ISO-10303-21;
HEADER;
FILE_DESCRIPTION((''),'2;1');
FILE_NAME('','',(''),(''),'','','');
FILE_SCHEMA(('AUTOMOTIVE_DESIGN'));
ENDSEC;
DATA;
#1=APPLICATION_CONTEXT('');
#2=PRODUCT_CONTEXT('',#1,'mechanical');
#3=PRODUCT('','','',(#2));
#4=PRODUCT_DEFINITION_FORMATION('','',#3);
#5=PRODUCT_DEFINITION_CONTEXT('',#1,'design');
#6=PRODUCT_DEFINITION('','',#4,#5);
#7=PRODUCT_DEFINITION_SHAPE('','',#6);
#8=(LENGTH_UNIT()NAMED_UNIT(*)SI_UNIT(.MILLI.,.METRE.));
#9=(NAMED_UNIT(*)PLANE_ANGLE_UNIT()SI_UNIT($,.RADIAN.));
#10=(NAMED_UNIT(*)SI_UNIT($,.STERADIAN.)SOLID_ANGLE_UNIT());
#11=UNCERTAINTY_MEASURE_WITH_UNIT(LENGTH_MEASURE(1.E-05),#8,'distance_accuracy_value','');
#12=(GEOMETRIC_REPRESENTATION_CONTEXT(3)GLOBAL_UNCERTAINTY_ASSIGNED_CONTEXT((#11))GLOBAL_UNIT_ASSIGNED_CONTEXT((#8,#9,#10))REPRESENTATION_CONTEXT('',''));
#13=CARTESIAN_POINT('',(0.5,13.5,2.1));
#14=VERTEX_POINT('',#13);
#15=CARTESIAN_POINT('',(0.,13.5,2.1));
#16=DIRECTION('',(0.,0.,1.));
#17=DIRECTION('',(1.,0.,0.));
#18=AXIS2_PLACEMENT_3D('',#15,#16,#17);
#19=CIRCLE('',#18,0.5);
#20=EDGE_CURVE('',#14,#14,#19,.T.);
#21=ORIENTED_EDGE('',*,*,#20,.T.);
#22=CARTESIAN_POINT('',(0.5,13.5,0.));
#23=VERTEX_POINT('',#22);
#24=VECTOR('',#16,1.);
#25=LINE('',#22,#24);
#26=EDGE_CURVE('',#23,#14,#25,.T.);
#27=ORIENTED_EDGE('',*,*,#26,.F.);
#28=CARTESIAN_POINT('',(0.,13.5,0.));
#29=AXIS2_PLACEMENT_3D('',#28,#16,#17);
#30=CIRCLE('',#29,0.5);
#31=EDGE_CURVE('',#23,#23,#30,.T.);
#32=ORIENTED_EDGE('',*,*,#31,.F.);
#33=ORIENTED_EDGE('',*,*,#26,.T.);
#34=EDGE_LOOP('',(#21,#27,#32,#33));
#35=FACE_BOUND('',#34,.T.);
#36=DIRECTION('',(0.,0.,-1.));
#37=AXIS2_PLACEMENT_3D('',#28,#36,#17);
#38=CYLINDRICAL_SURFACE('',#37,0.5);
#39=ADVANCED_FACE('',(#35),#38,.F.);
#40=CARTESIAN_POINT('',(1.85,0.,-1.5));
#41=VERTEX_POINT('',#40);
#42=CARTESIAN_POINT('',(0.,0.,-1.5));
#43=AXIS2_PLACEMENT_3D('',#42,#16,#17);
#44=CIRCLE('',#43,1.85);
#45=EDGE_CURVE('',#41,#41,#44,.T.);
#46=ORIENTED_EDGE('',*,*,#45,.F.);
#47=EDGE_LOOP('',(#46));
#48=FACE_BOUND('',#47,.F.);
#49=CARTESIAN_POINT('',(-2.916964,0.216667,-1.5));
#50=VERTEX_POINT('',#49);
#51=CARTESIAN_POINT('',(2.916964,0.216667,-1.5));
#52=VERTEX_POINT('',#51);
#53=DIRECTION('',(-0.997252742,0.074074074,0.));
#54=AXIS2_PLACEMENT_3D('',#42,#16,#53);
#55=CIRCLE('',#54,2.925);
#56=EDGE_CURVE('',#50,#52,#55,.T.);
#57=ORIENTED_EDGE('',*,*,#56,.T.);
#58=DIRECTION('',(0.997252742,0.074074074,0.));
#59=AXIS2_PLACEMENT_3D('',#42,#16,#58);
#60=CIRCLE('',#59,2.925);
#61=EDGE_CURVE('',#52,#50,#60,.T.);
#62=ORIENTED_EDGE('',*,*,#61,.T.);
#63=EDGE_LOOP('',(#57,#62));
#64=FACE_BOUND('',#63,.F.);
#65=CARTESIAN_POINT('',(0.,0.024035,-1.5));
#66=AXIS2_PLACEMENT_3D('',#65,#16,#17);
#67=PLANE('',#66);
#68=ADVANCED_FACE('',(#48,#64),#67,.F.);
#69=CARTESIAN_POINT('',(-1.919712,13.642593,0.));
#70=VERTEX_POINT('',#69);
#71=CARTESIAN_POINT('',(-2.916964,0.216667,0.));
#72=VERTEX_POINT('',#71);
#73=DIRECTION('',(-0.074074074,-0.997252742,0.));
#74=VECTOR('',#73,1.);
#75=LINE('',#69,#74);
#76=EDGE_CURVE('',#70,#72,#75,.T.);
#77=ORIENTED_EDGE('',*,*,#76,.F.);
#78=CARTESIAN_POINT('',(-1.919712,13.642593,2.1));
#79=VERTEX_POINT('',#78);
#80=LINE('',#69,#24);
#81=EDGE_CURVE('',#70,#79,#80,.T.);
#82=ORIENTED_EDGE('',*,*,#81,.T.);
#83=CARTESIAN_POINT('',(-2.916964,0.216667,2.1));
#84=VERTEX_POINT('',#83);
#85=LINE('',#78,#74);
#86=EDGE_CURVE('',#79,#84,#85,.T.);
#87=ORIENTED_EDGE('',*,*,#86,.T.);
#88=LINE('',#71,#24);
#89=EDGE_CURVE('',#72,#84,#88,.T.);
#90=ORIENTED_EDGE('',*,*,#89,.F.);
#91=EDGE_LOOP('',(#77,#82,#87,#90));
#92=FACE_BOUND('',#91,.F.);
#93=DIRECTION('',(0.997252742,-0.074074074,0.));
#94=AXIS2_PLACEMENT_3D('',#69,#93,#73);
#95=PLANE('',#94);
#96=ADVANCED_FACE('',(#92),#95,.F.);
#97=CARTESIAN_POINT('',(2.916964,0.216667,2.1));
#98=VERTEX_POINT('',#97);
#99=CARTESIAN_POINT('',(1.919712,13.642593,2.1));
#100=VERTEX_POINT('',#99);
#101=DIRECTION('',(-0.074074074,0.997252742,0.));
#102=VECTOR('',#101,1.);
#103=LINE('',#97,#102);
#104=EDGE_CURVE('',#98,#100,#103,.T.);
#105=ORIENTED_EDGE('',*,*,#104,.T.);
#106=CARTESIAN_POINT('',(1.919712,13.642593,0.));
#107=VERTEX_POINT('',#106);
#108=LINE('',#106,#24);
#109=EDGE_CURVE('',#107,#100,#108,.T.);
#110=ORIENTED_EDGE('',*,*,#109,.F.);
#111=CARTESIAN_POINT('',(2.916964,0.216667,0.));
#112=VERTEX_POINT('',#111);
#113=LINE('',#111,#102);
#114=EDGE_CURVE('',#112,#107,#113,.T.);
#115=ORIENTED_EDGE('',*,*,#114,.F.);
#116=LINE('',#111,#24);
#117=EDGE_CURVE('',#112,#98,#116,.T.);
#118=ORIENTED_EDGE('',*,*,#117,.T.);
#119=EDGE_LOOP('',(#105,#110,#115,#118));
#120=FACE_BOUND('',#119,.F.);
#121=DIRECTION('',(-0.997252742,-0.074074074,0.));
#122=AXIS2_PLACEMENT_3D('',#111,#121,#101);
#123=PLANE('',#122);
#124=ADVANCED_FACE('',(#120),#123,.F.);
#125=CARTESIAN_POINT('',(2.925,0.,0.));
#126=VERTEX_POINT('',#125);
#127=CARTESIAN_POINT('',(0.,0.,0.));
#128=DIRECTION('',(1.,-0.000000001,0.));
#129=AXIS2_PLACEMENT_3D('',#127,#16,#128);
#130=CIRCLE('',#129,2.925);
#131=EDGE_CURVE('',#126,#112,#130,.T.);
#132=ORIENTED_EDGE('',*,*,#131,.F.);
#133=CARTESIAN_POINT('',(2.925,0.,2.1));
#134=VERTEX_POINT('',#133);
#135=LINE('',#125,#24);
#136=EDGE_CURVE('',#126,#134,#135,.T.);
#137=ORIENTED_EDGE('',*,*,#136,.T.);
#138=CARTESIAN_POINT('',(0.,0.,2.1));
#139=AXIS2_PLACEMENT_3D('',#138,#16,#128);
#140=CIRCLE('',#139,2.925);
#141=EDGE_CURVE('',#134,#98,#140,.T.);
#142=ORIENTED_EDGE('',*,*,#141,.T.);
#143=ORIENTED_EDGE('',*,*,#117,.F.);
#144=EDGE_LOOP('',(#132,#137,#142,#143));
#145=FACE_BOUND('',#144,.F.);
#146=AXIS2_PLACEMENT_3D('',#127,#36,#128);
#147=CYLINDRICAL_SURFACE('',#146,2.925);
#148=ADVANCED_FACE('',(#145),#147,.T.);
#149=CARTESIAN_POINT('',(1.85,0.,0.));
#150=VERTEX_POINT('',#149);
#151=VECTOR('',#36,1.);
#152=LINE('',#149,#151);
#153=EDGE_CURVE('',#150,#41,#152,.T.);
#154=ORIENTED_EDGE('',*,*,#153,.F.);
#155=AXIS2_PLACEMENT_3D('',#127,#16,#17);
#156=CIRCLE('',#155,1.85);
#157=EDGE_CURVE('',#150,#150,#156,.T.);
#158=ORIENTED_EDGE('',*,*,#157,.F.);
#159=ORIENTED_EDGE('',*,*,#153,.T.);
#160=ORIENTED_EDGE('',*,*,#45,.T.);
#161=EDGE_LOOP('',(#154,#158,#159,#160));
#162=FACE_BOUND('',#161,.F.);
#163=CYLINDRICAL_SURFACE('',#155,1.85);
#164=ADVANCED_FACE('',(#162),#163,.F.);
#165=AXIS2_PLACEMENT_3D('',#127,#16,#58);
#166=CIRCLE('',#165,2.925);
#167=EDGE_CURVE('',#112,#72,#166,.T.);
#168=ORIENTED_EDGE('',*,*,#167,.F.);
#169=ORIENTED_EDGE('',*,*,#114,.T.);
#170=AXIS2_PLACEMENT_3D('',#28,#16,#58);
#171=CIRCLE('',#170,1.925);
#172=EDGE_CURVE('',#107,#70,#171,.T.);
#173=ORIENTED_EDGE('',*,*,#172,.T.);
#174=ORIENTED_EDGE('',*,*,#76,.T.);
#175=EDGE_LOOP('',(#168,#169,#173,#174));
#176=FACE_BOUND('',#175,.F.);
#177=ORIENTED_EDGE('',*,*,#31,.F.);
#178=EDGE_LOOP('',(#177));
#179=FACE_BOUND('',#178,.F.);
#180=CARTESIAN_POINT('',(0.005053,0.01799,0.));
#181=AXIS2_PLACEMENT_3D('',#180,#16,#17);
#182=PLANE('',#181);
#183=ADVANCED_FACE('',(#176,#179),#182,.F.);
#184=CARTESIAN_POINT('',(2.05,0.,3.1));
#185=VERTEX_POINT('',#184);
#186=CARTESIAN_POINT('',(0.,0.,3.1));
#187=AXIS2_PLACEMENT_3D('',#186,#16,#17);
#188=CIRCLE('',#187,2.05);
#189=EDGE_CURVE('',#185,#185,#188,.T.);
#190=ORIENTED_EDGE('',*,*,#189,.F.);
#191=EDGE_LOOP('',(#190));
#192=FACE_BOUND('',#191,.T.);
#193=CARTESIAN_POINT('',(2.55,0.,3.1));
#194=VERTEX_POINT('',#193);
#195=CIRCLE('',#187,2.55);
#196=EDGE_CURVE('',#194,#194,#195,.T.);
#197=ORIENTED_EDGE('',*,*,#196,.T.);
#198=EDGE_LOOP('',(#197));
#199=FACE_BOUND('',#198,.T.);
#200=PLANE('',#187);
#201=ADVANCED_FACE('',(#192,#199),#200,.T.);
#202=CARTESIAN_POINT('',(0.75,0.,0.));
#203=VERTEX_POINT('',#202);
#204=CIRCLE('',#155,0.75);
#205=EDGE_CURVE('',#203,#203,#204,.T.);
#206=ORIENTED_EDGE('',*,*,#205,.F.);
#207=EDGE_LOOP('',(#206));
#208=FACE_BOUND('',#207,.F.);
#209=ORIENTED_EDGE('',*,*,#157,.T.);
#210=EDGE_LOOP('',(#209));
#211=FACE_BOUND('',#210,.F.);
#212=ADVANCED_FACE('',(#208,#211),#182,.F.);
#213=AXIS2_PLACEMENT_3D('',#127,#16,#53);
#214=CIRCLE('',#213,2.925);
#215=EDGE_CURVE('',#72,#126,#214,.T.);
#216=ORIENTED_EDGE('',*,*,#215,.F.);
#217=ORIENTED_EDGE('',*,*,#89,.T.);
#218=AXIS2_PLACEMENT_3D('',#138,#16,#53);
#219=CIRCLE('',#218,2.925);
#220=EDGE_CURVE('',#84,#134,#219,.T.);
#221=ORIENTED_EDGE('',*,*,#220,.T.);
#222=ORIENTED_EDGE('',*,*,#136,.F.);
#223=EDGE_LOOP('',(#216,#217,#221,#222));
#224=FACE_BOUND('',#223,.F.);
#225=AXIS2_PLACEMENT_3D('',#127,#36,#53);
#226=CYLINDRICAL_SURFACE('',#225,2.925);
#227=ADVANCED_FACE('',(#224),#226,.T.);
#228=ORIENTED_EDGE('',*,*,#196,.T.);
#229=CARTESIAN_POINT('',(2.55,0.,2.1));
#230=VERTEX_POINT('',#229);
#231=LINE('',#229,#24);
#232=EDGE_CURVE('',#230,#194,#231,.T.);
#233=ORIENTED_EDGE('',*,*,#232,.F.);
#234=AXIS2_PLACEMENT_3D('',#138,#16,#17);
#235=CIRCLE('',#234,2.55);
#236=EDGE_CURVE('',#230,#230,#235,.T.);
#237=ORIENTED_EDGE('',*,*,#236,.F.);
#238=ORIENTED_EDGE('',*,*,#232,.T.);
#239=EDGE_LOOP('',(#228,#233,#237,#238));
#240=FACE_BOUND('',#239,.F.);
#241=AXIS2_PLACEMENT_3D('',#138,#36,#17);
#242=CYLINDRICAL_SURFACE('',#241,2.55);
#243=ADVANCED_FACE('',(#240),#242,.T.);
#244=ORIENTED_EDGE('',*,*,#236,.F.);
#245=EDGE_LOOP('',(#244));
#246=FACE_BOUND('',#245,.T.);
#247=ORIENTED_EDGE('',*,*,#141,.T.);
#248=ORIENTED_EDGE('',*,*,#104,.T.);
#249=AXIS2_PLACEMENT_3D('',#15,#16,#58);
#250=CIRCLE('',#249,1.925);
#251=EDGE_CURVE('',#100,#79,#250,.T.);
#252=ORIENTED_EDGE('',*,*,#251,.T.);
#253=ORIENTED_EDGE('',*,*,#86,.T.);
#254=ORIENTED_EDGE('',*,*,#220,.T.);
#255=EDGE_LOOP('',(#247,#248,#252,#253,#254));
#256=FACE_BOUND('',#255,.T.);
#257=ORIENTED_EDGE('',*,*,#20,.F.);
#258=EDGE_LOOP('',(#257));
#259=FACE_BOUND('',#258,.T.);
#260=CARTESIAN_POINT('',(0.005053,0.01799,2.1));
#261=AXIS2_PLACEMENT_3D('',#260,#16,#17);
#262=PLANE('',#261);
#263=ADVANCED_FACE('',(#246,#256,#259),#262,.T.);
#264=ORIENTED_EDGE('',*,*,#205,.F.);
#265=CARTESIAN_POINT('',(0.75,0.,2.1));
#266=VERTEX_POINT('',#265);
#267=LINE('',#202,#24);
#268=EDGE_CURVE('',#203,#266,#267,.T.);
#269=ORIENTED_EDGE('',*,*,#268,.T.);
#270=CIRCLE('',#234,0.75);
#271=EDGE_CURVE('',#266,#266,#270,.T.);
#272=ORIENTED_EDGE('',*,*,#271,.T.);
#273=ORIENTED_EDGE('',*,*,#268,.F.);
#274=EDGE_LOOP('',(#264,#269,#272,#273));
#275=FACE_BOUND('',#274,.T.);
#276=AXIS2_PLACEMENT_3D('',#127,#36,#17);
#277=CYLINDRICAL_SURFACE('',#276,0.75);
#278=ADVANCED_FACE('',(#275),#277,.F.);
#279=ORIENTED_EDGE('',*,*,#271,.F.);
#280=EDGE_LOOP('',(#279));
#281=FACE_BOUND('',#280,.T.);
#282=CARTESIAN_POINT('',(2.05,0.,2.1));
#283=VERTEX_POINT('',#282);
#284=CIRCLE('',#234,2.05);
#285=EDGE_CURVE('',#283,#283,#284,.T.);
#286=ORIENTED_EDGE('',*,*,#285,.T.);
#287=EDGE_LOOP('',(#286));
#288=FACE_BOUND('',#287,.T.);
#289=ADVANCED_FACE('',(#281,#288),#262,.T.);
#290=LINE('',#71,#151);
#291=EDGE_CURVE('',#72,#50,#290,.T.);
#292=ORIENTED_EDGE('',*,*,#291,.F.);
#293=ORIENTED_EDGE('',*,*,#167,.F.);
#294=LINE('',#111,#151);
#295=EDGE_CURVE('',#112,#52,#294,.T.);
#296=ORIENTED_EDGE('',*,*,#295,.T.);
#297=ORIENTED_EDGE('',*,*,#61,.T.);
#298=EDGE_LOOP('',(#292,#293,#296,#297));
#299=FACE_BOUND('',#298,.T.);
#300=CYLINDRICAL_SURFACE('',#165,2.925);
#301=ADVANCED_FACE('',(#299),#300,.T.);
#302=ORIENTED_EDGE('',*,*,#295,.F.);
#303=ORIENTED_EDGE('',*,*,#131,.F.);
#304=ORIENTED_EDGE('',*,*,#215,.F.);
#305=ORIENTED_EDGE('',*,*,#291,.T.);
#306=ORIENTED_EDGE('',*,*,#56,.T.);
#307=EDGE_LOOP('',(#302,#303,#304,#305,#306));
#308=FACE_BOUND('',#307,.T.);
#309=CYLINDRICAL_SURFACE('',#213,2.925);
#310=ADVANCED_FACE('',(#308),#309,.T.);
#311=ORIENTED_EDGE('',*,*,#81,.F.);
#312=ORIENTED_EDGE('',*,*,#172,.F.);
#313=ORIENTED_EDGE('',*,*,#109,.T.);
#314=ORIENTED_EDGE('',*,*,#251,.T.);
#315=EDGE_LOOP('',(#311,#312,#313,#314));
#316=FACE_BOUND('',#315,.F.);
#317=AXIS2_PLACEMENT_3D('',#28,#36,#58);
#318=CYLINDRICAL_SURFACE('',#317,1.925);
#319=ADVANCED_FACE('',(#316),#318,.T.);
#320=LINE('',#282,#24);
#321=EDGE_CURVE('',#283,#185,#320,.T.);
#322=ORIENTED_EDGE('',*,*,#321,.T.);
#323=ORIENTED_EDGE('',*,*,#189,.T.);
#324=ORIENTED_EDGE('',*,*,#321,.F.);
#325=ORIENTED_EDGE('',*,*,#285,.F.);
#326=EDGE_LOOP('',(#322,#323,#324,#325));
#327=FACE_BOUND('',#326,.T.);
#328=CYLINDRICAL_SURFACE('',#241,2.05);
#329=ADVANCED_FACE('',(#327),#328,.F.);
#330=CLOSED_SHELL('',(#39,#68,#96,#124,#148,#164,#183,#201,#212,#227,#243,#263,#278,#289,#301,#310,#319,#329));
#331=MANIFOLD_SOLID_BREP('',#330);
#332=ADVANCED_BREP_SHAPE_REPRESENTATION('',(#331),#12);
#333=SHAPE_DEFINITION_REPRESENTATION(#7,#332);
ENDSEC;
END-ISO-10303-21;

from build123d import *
from build123d import SkipClean  # not in build123d's __all__

# Parameters (mm, degrees)
F0_R     = 0.75
F0_R_2   = 0.5
F1_DEPTH = 2.1
F2_R     = 1.85
F3_DEPTH = 1.5
F4_R     = 2.55
F4_R_2   = 2.05
F5_DEPTH = 1


# Not quite as in the source:
# - after a boolean that leaves OpenCascade's solid faulty, fix() repairs it


with BuildPart() as f1:
    # F0 (on Top) → F1 (new body)
    with BuildSketch(Plane.XY):
        with BuildLine():
            ThreePointArc((-2.9169642705, 0.2166666667), (-0.108407815, -2.9229903773), (2.925, 0))
            ThreePointArc((2.925, 0), (2.9229903773, 0.108407815), (2.9169642705, 0.2166666667))
            ThreePointArc((2.9169642705, 0.2166666667), (0, 2.925), (-2.9169642705, 0.2166666667))
        make_face()
        Circle(F0_R, mode=Mode.SUBTRACT)
        with BuildLine():
            ThreePointArc((-2.9169642705, 0.2166666667), (0, 2.925), (2.9169642705, 0.2166666667))
            Line((2.9169642705, 0.2166666667), (1.9197115285, 13.6425925926))
            ThreePointArc((1.9197115285, 13.6425925926), (1.9236774278, 13.5713453141), (1.925, 13.5))
            ThreePointArc((1.925, 13.5), (-0.0713453141, 11.5763225722), (-1.9197115285, 13.6425925926))
            Line((-1.9197115285, 13.6425925926), (-2.9169642705, 0.2166666667))
        make_face()
        with BuildLine():
            ThreePointArc((1.925, 13.5), (1.9236774278, 13.5713453141), (1.9197115285, 13.6425925926))
            ThreePointArc((1.9197115285, 13.6425925926), (0, 15.425), (-1.9197115285, 13.6425925926))
            ThreePointArc((-1.9197115285, 13.6425925926), (-0.0713453141, 11.5763225722), (1.925, 13.5))
        make_face()
        with Locations((0, 13.5)):
            Circle(F0_R_2, mode=Mode.SUBTRACT)
    extrude(amount=F1_DEPTH)

    # F2 (on face) → F3 (join)
    with BuildSketch(Plane.XY):
        with BuildLine():
            ThreePointArc((2.9169642705, 0.2166666667), (0, 2.925), (-2.9169642705, 0.2166666667))
            ThreePointArc((-2.9169642705, 0.2166666667), (0, -2.925), (2.9169642705, 0.2166666667))
        make_face()
        Circle(F2_R, mode=Mode.SUBTRACT)
    with SkipClean():  # cleaning this boolean's faces spoils the solid; the shape is the same uncleaned
        extrude(amount=-F3_DEPTH)

    # F4 (on face) → F5 (join)
    with BuildSketch(Plane.XY.offset(2.1)):
        Circle(F4_R)
        Circle(F4_R_2, mode=Mode.SUBTRACT)
    extrude(amount=F5_DEPTH)

    add(f1.part.fix(), mode=Mode.REPLACE)


solid = f1.part
